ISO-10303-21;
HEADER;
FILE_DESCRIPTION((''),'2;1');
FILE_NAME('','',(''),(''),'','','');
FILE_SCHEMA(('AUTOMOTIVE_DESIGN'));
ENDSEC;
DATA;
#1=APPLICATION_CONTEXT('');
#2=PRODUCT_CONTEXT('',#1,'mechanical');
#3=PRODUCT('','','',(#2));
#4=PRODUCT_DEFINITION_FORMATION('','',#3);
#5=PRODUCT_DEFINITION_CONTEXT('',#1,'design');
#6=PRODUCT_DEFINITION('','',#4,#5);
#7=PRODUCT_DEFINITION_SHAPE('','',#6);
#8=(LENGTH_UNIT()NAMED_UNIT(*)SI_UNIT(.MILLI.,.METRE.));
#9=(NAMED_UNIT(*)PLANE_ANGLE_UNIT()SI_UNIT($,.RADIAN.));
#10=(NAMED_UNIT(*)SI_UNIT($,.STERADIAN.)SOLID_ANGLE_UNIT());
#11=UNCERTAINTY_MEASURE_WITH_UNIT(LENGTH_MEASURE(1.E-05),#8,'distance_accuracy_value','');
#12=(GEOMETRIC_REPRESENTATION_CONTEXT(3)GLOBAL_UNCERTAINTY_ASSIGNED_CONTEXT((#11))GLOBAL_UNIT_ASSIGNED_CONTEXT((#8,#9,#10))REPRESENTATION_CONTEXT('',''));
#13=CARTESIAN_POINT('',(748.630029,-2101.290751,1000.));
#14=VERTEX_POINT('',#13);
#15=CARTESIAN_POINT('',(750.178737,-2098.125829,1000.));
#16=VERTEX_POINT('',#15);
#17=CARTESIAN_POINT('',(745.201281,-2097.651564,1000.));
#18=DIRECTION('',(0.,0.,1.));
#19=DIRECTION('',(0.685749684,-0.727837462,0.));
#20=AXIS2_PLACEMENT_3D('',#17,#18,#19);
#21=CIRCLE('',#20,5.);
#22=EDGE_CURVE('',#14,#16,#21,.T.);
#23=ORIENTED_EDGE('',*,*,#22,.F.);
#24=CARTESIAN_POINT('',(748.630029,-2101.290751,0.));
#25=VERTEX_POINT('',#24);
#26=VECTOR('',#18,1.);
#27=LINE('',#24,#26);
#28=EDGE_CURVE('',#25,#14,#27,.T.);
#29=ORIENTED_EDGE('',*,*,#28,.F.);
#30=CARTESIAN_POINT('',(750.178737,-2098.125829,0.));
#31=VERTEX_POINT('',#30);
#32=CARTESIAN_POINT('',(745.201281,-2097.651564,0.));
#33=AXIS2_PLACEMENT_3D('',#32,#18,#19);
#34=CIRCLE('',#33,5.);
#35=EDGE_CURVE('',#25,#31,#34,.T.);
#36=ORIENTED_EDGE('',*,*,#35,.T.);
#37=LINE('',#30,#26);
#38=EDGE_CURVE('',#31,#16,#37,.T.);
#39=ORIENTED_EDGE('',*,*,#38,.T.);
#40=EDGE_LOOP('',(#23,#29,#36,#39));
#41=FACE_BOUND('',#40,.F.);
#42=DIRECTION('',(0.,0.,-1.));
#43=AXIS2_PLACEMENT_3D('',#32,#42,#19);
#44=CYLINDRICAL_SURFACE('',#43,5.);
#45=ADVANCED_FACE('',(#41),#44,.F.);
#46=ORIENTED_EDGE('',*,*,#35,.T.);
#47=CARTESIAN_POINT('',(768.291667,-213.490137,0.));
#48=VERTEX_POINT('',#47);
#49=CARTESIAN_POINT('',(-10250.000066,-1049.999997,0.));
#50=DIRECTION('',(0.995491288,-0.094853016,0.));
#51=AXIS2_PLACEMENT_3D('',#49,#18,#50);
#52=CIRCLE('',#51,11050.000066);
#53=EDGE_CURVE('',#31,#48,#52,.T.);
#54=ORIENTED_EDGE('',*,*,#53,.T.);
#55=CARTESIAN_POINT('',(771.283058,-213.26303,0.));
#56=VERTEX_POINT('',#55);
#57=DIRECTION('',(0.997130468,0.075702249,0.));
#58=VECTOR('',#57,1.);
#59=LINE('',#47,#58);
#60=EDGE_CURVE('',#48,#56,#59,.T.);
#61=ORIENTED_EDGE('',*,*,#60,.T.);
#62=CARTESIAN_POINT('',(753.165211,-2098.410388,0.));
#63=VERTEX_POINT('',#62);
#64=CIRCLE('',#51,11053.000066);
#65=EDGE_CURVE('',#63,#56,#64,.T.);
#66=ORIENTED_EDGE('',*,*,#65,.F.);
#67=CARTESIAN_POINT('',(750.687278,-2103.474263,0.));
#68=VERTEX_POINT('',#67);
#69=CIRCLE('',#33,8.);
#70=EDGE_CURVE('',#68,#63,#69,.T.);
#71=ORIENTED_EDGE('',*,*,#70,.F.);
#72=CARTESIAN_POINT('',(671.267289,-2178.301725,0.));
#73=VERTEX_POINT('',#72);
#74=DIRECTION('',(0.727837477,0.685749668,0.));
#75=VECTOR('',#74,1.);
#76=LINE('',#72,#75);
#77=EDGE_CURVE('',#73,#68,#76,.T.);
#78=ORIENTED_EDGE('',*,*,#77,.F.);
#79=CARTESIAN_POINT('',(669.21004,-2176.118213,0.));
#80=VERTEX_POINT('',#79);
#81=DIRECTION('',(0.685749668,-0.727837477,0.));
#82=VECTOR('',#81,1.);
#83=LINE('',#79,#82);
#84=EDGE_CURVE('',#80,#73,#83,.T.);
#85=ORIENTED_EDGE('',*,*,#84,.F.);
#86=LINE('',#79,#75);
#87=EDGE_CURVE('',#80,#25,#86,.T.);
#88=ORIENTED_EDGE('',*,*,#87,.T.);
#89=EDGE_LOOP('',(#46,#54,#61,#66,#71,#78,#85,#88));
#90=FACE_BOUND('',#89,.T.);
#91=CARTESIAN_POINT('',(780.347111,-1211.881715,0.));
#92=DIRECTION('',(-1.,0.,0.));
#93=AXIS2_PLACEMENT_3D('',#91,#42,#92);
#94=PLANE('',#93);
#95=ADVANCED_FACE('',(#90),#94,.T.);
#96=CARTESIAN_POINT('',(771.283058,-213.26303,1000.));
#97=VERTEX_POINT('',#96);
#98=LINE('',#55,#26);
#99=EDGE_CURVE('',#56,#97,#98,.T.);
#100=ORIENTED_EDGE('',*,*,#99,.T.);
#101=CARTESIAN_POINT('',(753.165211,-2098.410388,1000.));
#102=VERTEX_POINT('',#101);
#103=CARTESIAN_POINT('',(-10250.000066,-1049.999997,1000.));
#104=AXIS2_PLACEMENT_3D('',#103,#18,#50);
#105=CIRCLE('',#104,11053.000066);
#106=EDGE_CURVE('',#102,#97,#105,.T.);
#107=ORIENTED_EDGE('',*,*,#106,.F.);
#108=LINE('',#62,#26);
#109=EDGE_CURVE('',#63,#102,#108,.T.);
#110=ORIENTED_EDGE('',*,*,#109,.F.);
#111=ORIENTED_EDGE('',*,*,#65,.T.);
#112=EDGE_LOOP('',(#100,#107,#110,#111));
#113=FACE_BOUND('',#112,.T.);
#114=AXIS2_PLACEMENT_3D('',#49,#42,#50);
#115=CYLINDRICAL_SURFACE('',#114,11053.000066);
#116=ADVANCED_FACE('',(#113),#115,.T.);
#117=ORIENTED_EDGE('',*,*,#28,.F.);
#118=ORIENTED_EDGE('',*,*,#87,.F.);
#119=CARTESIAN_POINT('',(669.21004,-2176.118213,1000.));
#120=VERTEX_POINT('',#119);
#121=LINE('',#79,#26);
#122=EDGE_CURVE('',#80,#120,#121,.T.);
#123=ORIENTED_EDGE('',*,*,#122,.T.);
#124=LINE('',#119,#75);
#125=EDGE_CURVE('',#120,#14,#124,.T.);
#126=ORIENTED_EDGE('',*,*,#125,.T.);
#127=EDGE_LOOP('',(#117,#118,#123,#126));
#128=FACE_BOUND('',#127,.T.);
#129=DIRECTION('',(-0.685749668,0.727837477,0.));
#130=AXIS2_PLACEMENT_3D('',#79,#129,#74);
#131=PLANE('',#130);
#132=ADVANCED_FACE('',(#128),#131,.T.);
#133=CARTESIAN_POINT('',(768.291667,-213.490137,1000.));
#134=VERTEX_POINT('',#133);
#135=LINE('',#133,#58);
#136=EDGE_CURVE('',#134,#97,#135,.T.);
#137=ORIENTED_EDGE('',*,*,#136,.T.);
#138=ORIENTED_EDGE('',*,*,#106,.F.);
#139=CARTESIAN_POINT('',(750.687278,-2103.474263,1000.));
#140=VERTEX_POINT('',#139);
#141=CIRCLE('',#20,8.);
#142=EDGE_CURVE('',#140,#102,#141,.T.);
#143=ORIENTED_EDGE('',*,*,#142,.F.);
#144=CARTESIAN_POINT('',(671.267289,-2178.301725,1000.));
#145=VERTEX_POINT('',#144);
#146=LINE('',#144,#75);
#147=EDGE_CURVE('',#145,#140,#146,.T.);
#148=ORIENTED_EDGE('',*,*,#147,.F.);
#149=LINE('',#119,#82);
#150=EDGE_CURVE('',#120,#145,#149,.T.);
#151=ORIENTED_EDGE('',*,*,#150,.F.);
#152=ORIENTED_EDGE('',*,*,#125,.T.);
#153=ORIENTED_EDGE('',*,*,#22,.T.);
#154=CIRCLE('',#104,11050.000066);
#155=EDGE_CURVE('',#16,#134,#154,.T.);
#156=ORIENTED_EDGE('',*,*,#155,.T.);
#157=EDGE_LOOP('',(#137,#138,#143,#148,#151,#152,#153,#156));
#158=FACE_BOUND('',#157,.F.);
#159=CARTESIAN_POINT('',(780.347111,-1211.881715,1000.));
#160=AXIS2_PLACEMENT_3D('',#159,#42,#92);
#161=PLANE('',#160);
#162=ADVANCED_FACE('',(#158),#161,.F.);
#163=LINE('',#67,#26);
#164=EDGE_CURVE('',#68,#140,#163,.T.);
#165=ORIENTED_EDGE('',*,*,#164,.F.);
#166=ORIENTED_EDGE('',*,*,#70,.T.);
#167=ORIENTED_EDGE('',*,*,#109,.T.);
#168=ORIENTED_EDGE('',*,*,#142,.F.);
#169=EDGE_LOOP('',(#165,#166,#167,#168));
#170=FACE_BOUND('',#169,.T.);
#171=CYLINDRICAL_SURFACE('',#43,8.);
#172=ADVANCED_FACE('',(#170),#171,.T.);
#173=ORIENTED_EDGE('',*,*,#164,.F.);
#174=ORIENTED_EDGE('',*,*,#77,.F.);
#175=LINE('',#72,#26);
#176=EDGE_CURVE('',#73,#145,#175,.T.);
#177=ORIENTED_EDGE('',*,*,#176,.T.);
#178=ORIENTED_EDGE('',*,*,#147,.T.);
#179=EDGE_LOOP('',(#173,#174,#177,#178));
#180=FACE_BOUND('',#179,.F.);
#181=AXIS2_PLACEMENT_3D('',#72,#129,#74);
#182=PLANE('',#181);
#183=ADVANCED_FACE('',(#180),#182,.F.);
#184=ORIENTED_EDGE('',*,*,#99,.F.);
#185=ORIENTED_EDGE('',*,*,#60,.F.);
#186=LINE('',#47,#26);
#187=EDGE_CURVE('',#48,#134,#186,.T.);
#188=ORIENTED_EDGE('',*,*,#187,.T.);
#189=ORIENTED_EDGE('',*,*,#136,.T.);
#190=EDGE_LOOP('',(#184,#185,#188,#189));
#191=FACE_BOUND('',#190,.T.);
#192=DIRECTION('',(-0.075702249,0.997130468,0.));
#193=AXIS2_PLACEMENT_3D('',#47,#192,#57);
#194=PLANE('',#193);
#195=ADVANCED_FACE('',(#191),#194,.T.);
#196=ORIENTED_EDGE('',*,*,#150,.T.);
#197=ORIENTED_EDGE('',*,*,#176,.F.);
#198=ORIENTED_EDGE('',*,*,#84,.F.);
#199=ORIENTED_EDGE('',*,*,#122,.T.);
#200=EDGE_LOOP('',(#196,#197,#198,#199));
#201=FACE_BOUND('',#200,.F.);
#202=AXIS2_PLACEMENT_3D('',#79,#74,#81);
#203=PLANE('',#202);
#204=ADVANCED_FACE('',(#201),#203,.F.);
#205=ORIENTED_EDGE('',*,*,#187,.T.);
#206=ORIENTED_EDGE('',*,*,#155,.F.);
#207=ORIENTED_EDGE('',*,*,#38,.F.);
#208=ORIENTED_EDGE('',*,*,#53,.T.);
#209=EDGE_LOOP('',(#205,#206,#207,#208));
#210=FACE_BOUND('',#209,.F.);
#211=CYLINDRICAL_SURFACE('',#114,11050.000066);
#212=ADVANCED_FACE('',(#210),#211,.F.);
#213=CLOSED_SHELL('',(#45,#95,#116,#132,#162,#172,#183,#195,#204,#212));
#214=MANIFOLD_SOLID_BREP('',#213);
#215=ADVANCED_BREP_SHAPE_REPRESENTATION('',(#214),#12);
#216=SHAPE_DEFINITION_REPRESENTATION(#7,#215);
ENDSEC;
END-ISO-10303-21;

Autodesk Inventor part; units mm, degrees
ref_plane "YZ Plane" through (0, 0, 0) normal (1, 0, 0) x (0, 1, 0)
ref_plane "XZ Plane" through (0, 0, 0) normal (0, 1, 0) x (-1, 0, 0)
ref_plane "XY Plane" through (0, 0, 0) normal (0, 0, 1) x (1, 0, 0)
sketch "Sketch1" plane through (0, 0, 0) normal (0, 0, 1) x (1, 0, 0)
  line L0 (-750, 0) -> (750, 0) construction
  line L1 (750, 0) -> (750, -2700) construction
  line L2 (750, -2700) -> (-750, -2700) construction
  line L3 (-750, -2700) -> (-750, 0) construction
  line L4 (800, 50) -> (-800, 50) construction
  line L5 (-800, 50) -> (-800, -2750) construction
  line L6 (-800, -2750) -> (800, -2750) construction
  line L7 (800, -2750) -> (800, 50) construction
  line L8 (-850, 100) -> (850, 100) construction
  line L9 (850, 100) -> (850, -2800) construction
  line L10 (850, -2800) -> (-850, -2800) construction
  line L11 (-850, -2800) -> (-850, 100) construction
  arc A0 (750, 0) -> (743.691501, 0.841272) centre (0, -5600) ccw construction
  line L12 (-750, -2100) -> (750, -2100) construction
  line L13 (115.485997, -2697.8227) -> (669.21004, -2176.118213) construction
  arc A1 (750, -2100) -> (750.178737, -2098.125829) centre (-10250, -1050) ccw construction
  line L14 (750, 0) -> (749.60177, -2.973451) construction
  arc A2 (750, -3.026786) -> (0, 47) centre (-0.2, -5602.999996) ccw construction
  line L15 (750, 0) -> (747.013575, -0.285068) construction
  arc A3 (767.164125, -238.640862) -> (747.4657, -5.032602) centre (-10252.989512, -1050.252733) ccw construction
  arc A4 (750.602724, -6.333527) -> (743.691501, 0.841272) centre (742.638487, -7.089123) ccw construction
  arc A5 (747.4657, -5.032602) -> (744.874766, -2.342571) centre (744.479152, -5.316372) ccw construction
  line L16 (750, -2100) -> (752.986425, -2100.285068) construction
  arc A6 (752.986425, -2100.285068) -> (771.283058, -213.26303) centre (-10246.989147, -1050.029193) ccw construction
  line L17 (750, -2100) -> (752.057249, -2102.183512) construction
  line L18 (752.05726, -2102.183502) -> (752.057249, -2102.183512) construction
  arc A7 (748.630029, -2101.290751) -> (750.178737, -2098.125829) centre (745.201281, -2097.651564) ccw
  line L19 (0, -2697) -> (110.793766, -2697) construction
  line L20 (112.851015, -2696.183512) -> (685.348728, -2156.790959) construction
  arc A8 (110, -2700) -> (115.485997, -2697.8227) centre (110, -2692) ccw construction
  arc A9 (110.793766, -2697) -> (112.851015, -2696.183512) centre (110.793766, -2694) ccw construction
  line L21 (685.348728, -2156.790959) -> (687.405977, -2158.974471) construction
  line L22 (752.05726, -2102.183502) -> (671.267289, -2178.301725) construction
  line L23 (671.267289, -2178.301725) -> (669.21004, -2176.118213) construction
  arc A10 (747.4657, -5.032602) -> (747.013575, -0.285068) centre (-10252.989512, -1050.252733) ccw construction
  arc A11 (743.691501, 0.841272) -> (0, 50) centre (0, -5600) ccw construction
  arc A12 (750.602724, -6.333527) -> (750, 0) centre (-10250, -1050) ccw construction
  line L24 (770.156022, -238.420524) -> (767.164125, -238.640862) construction
  line L25 (768.291667, -213.490137) -> (771.283058, -213.26303) construction
  arc A13 (768.291667, -213.490137) -> (750.602724, -6.333527) centre (-10250, -1050) ccw construction
  line L26 (0, 100) -> (0, 50) construction
  line L27 (0, -2700) -> (0, -2697) construction
  line L28 (0, 47) -> (0, 0) construction
  line L29 (0, 50) -> (0, 47) construction
  arc A14 (752.057249, -2102.183512) -> (752.986425, -2100.285068) centre (749.999822, -2099.999913) ccw construction
  line L30 (669.21004, -2176.118213) -> (748.630029, -2101.290751)
  arc A15 (750.178737, -2098.125829) -> (768.291667, -213.490137) centre (-10250, -1050) ccw
  line L31 (748.630029, -2101.290751) -> (750, -2100) construction
  point P0 (0, -2750)
  dimension "d54" = 1500
  dimension "d55" = 2700
  dimension "d58" = 2100
  dimension "d68" = 8
  dimension "d70" = 3
  dimension "d75" = 5
  dimension "d83" = 8
  dimension "d86" = 3
  dimension "d112" = 239.271
  dimension "d113" = 50
  dimension "d114" = 50
  dimension "d115" = 3
  dimension "d116" = 25
  dimension "d117" = 110
  dimension "d118" = 25
  dimension "d119" = 111
contour flange "Contour Flange2" sketch "Sketch1" thickness 3 bend radius 5 width 1000 along (0, 0, 1) mid plane no both sides no wall seen from (708.920034, -2138.704482, 0) lies toward (0.6857497, -0.7278375, 0) curves L30 A7 A15
bend "Bend2"
corner "Corner2"
equation "\"d36\" = Thickness"
equation "\"d37\" = BendReliefWidth"
equation "\"d38\" = BendReliefDepth"
equation "\"d39\" = MinimumRemnant"
equation "\"d40\" = TransitionRadius"
equation "\"d42\" = BendRadius"
equation "\"d44\" = CornerReliefSize"
equation "\"d45\" = GapSize"
equation "\"d46\" = JacobiRadiusSize"
equation "\"BendReliefWidth\" = Thickness"
equation "\"BendReliefDepth\" = 0.5 * Thickness"
equation "\"CornerReliefSize\" = 4 * Thickness"
equation "\"MinimumRemnant\" = 2 * Thickness"
equation "\"GapSize\" = Thickness"
equation "\"Thickness\" = 3"
equation "\"TransitionRadius\" = 5"
equation "\"BendRadius\" = 5"
equation "\"JacobiRadiusSize\" = 5"
properties part number "МОО 024 лист борт основной" material "Stainless Steel AISI 304"
